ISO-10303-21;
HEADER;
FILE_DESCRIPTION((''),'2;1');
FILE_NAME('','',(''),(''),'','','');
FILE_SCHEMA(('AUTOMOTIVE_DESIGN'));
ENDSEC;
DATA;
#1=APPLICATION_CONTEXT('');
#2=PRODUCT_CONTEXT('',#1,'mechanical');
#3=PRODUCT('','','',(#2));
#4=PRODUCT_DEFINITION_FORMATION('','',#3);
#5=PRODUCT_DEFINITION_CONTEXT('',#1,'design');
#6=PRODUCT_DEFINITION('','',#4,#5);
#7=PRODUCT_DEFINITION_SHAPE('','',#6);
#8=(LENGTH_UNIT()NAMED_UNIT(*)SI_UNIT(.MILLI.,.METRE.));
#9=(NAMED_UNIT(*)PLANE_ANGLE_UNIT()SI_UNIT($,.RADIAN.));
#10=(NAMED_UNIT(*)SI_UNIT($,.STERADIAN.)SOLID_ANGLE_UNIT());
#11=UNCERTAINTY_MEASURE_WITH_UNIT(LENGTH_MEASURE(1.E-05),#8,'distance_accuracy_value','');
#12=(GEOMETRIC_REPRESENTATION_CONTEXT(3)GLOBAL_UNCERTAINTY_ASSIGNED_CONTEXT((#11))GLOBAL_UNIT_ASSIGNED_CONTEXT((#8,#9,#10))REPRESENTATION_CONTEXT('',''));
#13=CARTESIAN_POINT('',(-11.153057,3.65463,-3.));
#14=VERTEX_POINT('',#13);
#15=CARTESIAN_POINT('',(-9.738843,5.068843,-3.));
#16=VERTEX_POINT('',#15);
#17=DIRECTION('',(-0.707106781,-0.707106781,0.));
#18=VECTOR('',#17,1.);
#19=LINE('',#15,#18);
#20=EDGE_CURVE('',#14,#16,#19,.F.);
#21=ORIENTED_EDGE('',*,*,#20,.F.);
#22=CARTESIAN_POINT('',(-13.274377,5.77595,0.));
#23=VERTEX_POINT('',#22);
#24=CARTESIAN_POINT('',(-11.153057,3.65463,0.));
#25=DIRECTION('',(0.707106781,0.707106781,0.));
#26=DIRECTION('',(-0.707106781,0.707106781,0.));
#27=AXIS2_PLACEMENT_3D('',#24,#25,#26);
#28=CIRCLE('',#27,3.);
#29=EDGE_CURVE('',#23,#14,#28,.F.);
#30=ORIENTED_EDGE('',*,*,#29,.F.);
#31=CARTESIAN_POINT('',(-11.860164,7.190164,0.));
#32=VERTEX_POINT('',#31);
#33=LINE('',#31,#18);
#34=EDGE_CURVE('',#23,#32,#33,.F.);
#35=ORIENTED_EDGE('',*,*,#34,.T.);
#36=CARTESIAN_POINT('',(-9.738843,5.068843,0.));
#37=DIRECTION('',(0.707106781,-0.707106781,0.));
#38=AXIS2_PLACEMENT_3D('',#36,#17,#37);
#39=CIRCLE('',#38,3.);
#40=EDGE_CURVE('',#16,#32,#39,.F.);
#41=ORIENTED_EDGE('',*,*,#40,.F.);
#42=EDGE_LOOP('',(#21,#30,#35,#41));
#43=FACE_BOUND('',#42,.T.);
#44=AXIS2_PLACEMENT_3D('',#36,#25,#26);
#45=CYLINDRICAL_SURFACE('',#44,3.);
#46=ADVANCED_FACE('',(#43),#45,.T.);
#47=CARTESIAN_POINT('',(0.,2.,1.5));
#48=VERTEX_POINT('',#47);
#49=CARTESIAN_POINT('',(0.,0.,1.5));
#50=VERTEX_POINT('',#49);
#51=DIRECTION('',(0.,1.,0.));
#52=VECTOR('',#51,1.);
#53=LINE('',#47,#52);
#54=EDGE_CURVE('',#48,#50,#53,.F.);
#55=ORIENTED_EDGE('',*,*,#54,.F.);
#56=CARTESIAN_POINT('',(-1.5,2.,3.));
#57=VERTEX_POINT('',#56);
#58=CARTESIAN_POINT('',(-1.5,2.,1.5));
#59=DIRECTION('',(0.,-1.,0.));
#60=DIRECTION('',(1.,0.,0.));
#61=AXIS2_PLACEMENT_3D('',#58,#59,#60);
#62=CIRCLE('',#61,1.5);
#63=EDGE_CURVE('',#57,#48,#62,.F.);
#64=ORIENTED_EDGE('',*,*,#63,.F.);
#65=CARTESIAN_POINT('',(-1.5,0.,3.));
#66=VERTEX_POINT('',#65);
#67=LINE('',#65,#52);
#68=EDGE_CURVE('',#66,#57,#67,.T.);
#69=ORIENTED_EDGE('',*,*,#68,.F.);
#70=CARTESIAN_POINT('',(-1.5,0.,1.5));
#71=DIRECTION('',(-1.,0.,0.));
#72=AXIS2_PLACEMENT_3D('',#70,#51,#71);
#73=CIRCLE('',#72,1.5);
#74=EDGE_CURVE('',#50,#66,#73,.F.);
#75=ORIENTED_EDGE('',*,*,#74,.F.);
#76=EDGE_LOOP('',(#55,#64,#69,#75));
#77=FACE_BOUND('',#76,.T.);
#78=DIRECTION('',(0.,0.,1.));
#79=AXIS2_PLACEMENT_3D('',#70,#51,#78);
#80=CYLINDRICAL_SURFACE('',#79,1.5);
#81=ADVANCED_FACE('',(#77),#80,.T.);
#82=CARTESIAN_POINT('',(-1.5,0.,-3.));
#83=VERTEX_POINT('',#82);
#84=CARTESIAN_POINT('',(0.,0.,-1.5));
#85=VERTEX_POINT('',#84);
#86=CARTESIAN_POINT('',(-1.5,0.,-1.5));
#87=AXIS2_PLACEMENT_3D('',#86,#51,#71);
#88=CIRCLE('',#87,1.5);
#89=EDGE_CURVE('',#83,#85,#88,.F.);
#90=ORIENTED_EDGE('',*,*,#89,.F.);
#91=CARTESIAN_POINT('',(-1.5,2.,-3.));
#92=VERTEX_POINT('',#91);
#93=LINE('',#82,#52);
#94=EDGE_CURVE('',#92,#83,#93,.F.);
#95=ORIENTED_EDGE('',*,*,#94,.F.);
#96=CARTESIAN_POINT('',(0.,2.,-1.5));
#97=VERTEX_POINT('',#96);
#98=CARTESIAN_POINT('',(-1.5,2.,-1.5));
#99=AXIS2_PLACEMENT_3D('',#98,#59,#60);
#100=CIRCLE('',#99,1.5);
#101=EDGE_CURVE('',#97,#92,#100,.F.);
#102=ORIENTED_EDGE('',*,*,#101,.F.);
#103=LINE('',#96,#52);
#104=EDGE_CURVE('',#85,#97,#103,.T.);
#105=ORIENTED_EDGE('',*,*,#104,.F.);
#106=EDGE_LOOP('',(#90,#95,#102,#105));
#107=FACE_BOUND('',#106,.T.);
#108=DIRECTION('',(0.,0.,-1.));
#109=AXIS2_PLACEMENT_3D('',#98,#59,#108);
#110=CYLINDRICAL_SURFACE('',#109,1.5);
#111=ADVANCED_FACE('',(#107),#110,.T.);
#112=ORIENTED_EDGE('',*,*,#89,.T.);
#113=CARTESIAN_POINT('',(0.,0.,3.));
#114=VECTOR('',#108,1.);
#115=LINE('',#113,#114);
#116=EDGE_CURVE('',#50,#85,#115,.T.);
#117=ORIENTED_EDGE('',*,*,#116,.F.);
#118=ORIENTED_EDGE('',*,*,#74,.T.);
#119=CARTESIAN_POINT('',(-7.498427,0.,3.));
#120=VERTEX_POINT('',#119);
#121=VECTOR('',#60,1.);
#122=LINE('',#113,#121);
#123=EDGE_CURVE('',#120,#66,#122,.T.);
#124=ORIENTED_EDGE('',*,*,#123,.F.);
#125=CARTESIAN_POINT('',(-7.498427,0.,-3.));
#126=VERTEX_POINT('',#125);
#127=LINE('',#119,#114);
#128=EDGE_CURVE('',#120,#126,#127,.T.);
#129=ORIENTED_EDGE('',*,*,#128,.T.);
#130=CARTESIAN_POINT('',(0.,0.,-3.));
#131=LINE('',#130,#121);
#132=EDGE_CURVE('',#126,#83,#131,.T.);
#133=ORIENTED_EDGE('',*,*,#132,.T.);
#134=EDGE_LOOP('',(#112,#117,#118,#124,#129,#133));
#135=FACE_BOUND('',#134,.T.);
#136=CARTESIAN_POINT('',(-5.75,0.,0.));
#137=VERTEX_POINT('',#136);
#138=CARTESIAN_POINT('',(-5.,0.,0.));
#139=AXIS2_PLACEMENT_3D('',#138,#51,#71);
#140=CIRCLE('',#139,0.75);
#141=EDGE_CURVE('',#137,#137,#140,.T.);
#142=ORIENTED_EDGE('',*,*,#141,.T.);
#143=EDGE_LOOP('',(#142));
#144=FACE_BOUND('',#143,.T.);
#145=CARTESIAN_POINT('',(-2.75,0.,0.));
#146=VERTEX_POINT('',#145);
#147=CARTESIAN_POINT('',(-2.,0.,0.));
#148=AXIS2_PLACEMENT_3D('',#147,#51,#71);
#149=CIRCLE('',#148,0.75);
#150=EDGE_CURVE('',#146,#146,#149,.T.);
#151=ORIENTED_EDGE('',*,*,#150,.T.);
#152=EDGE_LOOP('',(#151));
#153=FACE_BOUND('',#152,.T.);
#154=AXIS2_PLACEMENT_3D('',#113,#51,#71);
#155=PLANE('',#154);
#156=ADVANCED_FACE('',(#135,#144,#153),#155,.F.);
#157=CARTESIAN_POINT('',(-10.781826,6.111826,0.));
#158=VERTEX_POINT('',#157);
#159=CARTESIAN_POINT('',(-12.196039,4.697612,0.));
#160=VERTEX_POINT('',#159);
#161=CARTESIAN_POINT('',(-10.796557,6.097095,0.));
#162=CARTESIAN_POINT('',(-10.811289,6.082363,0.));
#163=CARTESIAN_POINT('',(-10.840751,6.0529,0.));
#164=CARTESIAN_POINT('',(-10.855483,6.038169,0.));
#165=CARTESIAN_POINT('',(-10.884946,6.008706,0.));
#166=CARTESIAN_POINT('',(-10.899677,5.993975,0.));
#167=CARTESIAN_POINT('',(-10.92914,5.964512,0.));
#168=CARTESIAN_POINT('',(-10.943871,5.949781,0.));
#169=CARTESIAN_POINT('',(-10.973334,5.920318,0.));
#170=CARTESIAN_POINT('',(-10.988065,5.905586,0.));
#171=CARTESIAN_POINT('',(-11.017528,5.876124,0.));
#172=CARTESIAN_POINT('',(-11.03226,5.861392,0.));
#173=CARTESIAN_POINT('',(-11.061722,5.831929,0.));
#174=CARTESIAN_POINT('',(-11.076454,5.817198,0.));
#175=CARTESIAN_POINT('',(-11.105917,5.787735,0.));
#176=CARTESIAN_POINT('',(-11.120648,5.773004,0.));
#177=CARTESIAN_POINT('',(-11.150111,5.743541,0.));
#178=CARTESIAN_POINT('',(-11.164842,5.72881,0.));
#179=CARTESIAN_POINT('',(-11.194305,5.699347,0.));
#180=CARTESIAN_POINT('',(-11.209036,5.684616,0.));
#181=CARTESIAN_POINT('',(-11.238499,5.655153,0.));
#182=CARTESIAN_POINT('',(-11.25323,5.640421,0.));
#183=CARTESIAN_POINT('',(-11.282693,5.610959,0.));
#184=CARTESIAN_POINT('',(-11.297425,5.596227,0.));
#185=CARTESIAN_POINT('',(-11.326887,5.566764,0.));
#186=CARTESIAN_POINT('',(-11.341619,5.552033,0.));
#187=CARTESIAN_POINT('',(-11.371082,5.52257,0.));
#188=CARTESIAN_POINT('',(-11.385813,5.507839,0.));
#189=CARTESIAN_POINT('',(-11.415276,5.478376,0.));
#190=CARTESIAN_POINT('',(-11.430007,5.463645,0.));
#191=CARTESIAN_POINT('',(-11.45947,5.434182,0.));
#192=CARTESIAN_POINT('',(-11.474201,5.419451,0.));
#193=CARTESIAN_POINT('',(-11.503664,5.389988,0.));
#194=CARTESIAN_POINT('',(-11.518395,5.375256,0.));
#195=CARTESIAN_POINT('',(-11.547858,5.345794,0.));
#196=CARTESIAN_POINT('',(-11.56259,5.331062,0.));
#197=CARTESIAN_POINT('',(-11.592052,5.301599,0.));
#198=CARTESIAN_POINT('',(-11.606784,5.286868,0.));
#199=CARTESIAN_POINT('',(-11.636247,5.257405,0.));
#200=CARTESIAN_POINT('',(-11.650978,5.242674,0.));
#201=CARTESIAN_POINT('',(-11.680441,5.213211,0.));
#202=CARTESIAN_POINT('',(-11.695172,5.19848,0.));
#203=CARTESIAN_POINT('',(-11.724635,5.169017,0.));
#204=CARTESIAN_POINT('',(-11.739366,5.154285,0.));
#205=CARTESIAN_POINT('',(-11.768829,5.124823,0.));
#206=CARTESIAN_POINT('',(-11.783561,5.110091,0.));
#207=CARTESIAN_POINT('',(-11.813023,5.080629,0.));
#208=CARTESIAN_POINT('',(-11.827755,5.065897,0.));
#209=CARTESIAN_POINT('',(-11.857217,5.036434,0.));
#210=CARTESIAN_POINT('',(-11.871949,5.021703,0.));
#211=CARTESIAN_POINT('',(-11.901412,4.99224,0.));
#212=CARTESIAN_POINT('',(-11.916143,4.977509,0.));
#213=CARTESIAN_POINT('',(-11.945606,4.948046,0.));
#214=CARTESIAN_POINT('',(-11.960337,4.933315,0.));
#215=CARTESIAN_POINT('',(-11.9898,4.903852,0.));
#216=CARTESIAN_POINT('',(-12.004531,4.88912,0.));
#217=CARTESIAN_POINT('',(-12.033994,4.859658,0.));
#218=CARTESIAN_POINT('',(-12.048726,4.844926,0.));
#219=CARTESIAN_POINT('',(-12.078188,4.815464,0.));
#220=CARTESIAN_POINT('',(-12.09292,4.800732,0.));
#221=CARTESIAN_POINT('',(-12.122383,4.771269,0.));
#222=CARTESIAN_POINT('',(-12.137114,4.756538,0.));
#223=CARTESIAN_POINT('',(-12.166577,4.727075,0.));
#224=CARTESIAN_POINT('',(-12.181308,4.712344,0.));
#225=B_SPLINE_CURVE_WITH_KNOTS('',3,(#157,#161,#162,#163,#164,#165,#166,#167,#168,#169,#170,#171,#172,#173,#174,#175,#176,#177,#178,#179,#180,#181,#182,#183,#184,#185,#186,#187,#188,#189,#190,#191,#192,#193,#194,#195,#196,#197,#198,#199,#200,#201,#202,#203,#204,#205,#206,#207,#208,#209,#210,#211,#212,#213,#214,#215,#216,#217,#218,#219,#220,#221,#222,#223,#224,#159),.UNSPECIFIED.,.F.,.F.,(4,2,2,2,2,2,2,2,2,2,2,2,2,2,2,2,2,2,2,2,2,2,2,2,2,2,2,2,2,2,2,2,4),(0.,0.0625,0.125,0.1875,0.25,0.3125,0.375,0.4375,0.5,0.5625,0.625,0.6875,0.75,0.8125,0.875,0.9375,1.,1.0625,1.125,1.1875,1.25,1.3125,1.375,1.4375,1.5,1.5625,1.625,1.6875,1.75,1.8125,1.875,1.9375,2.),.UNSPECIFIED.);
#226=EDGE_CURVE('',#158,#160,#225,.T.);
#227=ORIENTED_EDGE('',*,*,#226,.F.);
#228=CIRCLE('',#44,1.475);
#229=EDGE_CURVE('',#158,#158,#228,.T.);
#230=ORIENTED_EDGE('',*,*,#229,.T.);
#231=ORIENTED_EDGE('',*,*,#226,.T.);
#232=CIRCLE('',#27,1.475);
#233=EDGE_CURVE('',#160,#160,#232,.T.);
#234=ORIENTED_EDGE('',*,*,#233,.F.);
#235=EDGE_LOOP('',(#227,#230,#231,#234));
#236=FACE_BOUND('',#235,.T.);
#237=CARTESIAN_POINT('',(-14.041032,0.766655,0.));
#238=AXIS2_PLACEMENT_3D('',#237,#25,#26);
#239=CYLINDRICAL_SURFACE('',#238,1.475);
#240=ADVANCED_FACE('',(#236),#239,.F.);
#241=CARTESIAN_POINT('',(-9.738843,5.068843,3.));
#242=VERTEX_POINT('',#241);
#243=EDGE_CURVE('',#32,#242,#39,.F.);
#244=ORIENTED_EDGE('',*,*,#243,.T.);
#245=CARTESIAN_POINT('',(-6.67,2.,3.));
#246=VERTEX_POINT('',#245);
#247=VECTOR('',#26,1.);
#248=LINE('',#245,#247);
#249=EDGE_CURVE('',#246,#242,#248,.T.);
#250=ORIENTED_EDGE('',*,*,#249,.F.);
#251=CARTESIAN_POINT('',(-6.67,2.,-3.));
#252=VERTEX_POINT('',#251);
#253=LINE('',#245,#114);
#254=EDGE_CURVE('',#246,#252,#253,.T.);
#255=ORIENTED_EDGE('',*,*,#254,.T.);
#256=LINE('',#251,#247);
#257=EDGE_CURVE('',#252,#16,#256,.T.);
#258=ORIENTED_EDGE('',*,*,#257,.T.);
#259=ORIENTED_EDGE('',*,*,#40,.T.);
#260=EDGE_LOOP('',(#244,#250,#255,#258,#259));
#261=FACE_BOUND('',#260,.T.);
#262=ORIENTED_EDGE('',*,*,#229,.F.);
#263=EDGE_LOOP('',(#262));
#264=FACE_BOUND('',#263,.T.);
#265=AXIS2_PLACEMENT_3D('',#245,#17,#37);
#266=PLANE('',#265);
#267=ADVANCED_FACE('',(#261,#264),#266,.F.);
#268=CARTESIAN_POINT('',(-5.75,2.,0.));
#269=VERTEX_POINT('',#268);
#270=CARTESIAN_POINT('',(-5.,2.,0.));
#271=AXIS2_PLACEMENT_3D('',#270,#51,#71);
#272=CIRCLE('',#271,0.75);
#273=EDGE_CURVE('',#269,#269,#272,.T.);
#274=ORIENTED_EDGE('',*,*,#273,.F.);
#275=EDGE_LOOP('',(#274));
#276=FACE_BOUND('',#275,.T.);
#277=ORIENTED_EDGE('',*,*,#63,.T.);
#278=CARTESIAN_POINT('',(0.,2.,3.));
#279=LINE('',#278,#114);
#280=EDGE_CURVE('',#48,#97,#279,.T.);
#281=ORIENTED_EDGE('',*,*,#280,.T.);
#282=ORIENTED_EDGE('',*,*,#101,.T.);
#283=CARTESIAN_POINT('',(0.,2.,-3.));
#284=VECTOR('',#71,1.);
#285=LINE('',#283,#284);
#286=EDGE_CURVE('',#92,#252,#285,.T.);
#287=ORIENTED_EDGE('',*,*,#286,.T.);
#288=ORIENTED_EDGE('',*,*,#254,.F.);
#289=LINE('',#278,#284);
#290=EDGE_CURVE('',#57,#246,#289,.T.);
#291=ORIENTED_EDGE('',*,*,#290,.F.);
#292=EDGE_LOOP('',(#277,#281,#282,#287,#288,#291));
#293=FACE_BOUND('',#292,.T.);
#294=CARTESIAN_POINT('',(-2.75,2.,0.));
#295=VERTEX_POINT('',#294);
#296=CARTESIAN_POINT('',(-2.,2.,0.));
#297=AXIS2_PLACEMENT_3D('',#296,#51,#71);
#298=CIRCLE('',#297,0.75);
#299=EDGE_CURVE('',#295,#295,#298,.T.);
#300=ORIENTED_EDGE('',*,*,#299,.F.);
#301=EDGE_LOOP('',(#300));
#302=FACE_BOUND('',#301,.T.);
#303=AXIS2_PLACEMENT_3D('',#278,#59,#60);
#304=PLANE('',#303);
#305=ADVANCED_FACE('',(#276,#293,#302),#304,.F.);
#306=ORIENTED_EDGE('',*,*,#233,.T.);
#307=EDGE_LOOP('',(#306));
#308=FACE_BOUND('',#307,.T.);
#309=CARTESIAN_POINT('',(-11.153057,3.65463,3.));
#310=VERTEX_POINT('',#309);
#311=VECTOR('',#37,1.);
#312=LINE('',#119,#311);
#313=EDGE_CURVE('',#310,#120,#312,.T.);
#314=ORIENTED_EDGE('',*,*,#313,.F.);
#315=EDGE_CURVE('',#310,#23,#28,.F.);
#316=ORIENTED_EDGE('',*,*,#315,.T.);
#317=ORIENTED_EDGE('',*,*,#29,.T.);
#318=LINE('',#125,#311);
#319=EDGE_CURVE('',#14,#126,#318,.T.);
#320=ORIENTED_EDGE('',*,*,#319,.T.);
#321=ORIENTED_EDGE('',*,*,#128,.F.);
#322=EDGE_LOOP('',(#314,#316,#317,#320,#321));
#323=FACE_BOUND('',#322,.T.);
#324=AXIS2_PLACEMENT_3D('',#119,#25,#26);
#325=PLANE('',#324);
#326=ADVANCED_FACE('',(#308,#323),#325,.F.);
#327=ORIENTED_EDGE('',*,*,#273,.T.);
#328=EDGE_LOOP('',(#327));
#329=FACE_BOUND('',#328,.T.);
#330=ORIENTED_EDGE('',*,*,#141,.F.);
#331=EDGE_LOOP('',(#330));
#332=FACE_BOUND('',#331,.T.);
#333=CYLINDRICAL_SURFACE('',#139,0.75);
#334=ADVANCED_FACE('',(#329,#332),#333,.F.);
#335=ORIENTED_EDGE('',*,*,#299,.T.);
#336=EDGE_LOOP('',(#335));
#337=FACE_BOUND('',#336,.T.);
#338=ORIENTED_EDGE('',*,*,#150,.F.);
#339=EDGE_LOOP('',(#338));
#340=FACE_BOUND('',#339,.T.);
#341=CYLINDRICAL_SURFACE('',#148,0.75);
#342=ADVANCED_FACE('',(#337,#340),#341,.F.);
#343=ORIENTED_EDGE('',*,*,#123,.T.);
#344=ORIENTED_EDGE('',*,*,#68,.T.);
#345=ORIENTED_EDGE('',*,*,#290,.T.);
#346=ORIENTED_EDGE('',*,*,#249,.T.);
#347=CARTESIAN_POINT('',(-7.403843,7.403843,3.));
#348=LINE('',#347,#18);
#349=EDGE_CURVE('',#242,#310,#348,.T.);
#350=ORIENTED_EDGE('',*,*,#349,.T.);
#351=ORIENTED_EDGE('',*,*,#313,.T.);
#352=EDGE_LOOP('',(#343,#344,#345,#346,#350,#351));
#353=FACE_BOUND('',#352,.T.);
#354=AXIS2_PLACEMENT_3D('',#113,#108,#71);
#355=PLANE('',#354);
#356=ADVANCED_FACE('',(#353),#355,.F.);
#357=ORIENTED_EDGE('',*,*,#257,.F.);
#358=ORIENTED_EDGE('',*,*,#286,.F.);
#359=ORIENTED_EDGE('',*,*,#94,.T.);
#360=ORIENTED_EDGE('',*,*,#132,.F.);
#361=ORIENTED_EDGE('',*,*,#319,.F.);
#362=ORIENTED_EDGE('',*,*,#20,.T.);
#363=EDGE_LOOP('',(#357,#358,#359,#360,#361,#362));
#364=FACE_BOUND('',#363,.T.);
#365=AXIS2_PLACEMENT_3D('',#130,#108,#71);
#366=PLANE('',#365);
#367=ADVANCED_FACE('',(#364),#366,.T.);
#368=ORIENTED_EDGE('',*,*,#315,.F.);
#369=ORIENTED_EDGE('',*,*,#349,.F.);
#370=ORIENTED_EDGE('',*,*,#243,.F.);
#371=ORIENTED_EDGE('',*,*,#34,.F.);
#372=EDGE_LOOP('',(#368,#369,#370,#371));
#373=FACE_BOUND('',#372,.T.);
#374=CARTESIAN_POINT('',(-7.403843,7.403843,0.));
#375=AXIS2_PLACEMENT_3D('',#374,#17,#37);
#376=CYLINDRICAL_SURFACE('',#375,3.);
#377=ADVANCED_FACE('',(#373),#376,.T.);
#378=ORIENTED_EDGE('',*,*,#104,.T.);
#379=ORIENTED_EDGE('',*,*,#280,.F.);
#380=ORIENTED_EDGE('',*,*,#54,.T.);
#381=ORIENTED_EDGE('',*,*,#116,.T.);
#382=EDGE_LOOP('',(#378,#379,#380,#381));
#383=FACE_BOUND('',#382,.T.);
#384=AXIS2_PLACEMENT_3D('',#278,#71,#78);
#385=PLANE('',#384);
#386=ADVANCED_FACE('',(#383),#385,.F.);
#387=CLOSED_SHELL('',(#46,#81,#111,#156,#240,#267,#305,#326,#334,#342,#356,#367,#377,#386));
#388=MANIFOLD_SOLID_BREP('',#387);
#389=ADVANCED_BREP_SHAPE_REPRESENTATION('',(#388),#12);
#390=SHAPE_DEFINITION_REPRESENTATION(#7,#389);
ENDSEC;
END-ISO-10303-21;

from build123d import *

# Parameters (mm, degrees)
SALIENTE_EXTRUIR1_DEPTH = 3
REDONDEO1_R             = 3
REDONDEO2_R             = 1.5
CROQUIS3_R              = 1.475
CORTAR_EXTRUIR1_DEPTH   = 15.812114009
CROQUIS4_R              = 0.75
CORTAR_EXTRUIR2_DEPTH   = 15.565263254


with BuildPart() as part:
    # Croquis1 → Saliente-Extruir1 (new, symmetric)
    with BuildSketch(Plane.XY):
        Polygon((0, 0), (-7.498427125, 0), (-13.274377336, 5.775950212), (-11.860163774, 7.190163774), (-6.67, 2), (0, 2), align=None)
    extrude(amount=SALIENTE_EXTRUIR1_DEPTH, both=True)

    # Redondeo1
    redondeo1_edges = [part.edges().sort_by_distance(p)[0] for p in [
        (-12.567270555, 6.483056993, -3),
        (-12.567270555, 6.483056993, 3),
    ]]
    fillet(redondeo1_edges, radius=REDONDEO1_R - 0.0001)  # a hair under: the kernel refuses the full size

    # Redondeo2
    redondeo2_edges = [part.edges().sort_by_distance(p)[0] for p in [
        (0, 1, 3),
        (0, 1, -3),
    ]]
    fillet(redondeo2_edges, radius=REDONDEO2_R)

    # Croquis3 → Cortar-Extruir1 (cut, through all)
    with BuildSketch(Plane(origin=(-2.335, -2.335, 0), x_dir=(0, 0, -1), z_dir=(0.7071067811865485, 0.7071067811865466, 0))):
        with Locations(Location((0, 10.470615793, 0), (0, 0, 90))):
            Circle(CROQUIS3_R)
    extrude(amount=-CORTAR_EXTRUIR1_DEPTH, mode=Mode.SUBTRACT)

    # Croquis4 → Cortar-Extruir2 (cut, through all)
    with BuildSketch(Plane(origin=(0, 2, 0), x_dir=(1, 0, 0), z_dir=(0, 1, 0))):
        with Locations(Location((-5, 0, 0), (0, 0, 180))):
            Circle(CROQUIS4_R)
        with Locations(Location((-2, 0, 0), (0, 0, 180))):
            Circle(CROQUIS4_R)
    extrude(amount=-CORTAR_EXTRUIR2_DEPTH, mode=Mode.SUBTRACT)


solid = part.part
